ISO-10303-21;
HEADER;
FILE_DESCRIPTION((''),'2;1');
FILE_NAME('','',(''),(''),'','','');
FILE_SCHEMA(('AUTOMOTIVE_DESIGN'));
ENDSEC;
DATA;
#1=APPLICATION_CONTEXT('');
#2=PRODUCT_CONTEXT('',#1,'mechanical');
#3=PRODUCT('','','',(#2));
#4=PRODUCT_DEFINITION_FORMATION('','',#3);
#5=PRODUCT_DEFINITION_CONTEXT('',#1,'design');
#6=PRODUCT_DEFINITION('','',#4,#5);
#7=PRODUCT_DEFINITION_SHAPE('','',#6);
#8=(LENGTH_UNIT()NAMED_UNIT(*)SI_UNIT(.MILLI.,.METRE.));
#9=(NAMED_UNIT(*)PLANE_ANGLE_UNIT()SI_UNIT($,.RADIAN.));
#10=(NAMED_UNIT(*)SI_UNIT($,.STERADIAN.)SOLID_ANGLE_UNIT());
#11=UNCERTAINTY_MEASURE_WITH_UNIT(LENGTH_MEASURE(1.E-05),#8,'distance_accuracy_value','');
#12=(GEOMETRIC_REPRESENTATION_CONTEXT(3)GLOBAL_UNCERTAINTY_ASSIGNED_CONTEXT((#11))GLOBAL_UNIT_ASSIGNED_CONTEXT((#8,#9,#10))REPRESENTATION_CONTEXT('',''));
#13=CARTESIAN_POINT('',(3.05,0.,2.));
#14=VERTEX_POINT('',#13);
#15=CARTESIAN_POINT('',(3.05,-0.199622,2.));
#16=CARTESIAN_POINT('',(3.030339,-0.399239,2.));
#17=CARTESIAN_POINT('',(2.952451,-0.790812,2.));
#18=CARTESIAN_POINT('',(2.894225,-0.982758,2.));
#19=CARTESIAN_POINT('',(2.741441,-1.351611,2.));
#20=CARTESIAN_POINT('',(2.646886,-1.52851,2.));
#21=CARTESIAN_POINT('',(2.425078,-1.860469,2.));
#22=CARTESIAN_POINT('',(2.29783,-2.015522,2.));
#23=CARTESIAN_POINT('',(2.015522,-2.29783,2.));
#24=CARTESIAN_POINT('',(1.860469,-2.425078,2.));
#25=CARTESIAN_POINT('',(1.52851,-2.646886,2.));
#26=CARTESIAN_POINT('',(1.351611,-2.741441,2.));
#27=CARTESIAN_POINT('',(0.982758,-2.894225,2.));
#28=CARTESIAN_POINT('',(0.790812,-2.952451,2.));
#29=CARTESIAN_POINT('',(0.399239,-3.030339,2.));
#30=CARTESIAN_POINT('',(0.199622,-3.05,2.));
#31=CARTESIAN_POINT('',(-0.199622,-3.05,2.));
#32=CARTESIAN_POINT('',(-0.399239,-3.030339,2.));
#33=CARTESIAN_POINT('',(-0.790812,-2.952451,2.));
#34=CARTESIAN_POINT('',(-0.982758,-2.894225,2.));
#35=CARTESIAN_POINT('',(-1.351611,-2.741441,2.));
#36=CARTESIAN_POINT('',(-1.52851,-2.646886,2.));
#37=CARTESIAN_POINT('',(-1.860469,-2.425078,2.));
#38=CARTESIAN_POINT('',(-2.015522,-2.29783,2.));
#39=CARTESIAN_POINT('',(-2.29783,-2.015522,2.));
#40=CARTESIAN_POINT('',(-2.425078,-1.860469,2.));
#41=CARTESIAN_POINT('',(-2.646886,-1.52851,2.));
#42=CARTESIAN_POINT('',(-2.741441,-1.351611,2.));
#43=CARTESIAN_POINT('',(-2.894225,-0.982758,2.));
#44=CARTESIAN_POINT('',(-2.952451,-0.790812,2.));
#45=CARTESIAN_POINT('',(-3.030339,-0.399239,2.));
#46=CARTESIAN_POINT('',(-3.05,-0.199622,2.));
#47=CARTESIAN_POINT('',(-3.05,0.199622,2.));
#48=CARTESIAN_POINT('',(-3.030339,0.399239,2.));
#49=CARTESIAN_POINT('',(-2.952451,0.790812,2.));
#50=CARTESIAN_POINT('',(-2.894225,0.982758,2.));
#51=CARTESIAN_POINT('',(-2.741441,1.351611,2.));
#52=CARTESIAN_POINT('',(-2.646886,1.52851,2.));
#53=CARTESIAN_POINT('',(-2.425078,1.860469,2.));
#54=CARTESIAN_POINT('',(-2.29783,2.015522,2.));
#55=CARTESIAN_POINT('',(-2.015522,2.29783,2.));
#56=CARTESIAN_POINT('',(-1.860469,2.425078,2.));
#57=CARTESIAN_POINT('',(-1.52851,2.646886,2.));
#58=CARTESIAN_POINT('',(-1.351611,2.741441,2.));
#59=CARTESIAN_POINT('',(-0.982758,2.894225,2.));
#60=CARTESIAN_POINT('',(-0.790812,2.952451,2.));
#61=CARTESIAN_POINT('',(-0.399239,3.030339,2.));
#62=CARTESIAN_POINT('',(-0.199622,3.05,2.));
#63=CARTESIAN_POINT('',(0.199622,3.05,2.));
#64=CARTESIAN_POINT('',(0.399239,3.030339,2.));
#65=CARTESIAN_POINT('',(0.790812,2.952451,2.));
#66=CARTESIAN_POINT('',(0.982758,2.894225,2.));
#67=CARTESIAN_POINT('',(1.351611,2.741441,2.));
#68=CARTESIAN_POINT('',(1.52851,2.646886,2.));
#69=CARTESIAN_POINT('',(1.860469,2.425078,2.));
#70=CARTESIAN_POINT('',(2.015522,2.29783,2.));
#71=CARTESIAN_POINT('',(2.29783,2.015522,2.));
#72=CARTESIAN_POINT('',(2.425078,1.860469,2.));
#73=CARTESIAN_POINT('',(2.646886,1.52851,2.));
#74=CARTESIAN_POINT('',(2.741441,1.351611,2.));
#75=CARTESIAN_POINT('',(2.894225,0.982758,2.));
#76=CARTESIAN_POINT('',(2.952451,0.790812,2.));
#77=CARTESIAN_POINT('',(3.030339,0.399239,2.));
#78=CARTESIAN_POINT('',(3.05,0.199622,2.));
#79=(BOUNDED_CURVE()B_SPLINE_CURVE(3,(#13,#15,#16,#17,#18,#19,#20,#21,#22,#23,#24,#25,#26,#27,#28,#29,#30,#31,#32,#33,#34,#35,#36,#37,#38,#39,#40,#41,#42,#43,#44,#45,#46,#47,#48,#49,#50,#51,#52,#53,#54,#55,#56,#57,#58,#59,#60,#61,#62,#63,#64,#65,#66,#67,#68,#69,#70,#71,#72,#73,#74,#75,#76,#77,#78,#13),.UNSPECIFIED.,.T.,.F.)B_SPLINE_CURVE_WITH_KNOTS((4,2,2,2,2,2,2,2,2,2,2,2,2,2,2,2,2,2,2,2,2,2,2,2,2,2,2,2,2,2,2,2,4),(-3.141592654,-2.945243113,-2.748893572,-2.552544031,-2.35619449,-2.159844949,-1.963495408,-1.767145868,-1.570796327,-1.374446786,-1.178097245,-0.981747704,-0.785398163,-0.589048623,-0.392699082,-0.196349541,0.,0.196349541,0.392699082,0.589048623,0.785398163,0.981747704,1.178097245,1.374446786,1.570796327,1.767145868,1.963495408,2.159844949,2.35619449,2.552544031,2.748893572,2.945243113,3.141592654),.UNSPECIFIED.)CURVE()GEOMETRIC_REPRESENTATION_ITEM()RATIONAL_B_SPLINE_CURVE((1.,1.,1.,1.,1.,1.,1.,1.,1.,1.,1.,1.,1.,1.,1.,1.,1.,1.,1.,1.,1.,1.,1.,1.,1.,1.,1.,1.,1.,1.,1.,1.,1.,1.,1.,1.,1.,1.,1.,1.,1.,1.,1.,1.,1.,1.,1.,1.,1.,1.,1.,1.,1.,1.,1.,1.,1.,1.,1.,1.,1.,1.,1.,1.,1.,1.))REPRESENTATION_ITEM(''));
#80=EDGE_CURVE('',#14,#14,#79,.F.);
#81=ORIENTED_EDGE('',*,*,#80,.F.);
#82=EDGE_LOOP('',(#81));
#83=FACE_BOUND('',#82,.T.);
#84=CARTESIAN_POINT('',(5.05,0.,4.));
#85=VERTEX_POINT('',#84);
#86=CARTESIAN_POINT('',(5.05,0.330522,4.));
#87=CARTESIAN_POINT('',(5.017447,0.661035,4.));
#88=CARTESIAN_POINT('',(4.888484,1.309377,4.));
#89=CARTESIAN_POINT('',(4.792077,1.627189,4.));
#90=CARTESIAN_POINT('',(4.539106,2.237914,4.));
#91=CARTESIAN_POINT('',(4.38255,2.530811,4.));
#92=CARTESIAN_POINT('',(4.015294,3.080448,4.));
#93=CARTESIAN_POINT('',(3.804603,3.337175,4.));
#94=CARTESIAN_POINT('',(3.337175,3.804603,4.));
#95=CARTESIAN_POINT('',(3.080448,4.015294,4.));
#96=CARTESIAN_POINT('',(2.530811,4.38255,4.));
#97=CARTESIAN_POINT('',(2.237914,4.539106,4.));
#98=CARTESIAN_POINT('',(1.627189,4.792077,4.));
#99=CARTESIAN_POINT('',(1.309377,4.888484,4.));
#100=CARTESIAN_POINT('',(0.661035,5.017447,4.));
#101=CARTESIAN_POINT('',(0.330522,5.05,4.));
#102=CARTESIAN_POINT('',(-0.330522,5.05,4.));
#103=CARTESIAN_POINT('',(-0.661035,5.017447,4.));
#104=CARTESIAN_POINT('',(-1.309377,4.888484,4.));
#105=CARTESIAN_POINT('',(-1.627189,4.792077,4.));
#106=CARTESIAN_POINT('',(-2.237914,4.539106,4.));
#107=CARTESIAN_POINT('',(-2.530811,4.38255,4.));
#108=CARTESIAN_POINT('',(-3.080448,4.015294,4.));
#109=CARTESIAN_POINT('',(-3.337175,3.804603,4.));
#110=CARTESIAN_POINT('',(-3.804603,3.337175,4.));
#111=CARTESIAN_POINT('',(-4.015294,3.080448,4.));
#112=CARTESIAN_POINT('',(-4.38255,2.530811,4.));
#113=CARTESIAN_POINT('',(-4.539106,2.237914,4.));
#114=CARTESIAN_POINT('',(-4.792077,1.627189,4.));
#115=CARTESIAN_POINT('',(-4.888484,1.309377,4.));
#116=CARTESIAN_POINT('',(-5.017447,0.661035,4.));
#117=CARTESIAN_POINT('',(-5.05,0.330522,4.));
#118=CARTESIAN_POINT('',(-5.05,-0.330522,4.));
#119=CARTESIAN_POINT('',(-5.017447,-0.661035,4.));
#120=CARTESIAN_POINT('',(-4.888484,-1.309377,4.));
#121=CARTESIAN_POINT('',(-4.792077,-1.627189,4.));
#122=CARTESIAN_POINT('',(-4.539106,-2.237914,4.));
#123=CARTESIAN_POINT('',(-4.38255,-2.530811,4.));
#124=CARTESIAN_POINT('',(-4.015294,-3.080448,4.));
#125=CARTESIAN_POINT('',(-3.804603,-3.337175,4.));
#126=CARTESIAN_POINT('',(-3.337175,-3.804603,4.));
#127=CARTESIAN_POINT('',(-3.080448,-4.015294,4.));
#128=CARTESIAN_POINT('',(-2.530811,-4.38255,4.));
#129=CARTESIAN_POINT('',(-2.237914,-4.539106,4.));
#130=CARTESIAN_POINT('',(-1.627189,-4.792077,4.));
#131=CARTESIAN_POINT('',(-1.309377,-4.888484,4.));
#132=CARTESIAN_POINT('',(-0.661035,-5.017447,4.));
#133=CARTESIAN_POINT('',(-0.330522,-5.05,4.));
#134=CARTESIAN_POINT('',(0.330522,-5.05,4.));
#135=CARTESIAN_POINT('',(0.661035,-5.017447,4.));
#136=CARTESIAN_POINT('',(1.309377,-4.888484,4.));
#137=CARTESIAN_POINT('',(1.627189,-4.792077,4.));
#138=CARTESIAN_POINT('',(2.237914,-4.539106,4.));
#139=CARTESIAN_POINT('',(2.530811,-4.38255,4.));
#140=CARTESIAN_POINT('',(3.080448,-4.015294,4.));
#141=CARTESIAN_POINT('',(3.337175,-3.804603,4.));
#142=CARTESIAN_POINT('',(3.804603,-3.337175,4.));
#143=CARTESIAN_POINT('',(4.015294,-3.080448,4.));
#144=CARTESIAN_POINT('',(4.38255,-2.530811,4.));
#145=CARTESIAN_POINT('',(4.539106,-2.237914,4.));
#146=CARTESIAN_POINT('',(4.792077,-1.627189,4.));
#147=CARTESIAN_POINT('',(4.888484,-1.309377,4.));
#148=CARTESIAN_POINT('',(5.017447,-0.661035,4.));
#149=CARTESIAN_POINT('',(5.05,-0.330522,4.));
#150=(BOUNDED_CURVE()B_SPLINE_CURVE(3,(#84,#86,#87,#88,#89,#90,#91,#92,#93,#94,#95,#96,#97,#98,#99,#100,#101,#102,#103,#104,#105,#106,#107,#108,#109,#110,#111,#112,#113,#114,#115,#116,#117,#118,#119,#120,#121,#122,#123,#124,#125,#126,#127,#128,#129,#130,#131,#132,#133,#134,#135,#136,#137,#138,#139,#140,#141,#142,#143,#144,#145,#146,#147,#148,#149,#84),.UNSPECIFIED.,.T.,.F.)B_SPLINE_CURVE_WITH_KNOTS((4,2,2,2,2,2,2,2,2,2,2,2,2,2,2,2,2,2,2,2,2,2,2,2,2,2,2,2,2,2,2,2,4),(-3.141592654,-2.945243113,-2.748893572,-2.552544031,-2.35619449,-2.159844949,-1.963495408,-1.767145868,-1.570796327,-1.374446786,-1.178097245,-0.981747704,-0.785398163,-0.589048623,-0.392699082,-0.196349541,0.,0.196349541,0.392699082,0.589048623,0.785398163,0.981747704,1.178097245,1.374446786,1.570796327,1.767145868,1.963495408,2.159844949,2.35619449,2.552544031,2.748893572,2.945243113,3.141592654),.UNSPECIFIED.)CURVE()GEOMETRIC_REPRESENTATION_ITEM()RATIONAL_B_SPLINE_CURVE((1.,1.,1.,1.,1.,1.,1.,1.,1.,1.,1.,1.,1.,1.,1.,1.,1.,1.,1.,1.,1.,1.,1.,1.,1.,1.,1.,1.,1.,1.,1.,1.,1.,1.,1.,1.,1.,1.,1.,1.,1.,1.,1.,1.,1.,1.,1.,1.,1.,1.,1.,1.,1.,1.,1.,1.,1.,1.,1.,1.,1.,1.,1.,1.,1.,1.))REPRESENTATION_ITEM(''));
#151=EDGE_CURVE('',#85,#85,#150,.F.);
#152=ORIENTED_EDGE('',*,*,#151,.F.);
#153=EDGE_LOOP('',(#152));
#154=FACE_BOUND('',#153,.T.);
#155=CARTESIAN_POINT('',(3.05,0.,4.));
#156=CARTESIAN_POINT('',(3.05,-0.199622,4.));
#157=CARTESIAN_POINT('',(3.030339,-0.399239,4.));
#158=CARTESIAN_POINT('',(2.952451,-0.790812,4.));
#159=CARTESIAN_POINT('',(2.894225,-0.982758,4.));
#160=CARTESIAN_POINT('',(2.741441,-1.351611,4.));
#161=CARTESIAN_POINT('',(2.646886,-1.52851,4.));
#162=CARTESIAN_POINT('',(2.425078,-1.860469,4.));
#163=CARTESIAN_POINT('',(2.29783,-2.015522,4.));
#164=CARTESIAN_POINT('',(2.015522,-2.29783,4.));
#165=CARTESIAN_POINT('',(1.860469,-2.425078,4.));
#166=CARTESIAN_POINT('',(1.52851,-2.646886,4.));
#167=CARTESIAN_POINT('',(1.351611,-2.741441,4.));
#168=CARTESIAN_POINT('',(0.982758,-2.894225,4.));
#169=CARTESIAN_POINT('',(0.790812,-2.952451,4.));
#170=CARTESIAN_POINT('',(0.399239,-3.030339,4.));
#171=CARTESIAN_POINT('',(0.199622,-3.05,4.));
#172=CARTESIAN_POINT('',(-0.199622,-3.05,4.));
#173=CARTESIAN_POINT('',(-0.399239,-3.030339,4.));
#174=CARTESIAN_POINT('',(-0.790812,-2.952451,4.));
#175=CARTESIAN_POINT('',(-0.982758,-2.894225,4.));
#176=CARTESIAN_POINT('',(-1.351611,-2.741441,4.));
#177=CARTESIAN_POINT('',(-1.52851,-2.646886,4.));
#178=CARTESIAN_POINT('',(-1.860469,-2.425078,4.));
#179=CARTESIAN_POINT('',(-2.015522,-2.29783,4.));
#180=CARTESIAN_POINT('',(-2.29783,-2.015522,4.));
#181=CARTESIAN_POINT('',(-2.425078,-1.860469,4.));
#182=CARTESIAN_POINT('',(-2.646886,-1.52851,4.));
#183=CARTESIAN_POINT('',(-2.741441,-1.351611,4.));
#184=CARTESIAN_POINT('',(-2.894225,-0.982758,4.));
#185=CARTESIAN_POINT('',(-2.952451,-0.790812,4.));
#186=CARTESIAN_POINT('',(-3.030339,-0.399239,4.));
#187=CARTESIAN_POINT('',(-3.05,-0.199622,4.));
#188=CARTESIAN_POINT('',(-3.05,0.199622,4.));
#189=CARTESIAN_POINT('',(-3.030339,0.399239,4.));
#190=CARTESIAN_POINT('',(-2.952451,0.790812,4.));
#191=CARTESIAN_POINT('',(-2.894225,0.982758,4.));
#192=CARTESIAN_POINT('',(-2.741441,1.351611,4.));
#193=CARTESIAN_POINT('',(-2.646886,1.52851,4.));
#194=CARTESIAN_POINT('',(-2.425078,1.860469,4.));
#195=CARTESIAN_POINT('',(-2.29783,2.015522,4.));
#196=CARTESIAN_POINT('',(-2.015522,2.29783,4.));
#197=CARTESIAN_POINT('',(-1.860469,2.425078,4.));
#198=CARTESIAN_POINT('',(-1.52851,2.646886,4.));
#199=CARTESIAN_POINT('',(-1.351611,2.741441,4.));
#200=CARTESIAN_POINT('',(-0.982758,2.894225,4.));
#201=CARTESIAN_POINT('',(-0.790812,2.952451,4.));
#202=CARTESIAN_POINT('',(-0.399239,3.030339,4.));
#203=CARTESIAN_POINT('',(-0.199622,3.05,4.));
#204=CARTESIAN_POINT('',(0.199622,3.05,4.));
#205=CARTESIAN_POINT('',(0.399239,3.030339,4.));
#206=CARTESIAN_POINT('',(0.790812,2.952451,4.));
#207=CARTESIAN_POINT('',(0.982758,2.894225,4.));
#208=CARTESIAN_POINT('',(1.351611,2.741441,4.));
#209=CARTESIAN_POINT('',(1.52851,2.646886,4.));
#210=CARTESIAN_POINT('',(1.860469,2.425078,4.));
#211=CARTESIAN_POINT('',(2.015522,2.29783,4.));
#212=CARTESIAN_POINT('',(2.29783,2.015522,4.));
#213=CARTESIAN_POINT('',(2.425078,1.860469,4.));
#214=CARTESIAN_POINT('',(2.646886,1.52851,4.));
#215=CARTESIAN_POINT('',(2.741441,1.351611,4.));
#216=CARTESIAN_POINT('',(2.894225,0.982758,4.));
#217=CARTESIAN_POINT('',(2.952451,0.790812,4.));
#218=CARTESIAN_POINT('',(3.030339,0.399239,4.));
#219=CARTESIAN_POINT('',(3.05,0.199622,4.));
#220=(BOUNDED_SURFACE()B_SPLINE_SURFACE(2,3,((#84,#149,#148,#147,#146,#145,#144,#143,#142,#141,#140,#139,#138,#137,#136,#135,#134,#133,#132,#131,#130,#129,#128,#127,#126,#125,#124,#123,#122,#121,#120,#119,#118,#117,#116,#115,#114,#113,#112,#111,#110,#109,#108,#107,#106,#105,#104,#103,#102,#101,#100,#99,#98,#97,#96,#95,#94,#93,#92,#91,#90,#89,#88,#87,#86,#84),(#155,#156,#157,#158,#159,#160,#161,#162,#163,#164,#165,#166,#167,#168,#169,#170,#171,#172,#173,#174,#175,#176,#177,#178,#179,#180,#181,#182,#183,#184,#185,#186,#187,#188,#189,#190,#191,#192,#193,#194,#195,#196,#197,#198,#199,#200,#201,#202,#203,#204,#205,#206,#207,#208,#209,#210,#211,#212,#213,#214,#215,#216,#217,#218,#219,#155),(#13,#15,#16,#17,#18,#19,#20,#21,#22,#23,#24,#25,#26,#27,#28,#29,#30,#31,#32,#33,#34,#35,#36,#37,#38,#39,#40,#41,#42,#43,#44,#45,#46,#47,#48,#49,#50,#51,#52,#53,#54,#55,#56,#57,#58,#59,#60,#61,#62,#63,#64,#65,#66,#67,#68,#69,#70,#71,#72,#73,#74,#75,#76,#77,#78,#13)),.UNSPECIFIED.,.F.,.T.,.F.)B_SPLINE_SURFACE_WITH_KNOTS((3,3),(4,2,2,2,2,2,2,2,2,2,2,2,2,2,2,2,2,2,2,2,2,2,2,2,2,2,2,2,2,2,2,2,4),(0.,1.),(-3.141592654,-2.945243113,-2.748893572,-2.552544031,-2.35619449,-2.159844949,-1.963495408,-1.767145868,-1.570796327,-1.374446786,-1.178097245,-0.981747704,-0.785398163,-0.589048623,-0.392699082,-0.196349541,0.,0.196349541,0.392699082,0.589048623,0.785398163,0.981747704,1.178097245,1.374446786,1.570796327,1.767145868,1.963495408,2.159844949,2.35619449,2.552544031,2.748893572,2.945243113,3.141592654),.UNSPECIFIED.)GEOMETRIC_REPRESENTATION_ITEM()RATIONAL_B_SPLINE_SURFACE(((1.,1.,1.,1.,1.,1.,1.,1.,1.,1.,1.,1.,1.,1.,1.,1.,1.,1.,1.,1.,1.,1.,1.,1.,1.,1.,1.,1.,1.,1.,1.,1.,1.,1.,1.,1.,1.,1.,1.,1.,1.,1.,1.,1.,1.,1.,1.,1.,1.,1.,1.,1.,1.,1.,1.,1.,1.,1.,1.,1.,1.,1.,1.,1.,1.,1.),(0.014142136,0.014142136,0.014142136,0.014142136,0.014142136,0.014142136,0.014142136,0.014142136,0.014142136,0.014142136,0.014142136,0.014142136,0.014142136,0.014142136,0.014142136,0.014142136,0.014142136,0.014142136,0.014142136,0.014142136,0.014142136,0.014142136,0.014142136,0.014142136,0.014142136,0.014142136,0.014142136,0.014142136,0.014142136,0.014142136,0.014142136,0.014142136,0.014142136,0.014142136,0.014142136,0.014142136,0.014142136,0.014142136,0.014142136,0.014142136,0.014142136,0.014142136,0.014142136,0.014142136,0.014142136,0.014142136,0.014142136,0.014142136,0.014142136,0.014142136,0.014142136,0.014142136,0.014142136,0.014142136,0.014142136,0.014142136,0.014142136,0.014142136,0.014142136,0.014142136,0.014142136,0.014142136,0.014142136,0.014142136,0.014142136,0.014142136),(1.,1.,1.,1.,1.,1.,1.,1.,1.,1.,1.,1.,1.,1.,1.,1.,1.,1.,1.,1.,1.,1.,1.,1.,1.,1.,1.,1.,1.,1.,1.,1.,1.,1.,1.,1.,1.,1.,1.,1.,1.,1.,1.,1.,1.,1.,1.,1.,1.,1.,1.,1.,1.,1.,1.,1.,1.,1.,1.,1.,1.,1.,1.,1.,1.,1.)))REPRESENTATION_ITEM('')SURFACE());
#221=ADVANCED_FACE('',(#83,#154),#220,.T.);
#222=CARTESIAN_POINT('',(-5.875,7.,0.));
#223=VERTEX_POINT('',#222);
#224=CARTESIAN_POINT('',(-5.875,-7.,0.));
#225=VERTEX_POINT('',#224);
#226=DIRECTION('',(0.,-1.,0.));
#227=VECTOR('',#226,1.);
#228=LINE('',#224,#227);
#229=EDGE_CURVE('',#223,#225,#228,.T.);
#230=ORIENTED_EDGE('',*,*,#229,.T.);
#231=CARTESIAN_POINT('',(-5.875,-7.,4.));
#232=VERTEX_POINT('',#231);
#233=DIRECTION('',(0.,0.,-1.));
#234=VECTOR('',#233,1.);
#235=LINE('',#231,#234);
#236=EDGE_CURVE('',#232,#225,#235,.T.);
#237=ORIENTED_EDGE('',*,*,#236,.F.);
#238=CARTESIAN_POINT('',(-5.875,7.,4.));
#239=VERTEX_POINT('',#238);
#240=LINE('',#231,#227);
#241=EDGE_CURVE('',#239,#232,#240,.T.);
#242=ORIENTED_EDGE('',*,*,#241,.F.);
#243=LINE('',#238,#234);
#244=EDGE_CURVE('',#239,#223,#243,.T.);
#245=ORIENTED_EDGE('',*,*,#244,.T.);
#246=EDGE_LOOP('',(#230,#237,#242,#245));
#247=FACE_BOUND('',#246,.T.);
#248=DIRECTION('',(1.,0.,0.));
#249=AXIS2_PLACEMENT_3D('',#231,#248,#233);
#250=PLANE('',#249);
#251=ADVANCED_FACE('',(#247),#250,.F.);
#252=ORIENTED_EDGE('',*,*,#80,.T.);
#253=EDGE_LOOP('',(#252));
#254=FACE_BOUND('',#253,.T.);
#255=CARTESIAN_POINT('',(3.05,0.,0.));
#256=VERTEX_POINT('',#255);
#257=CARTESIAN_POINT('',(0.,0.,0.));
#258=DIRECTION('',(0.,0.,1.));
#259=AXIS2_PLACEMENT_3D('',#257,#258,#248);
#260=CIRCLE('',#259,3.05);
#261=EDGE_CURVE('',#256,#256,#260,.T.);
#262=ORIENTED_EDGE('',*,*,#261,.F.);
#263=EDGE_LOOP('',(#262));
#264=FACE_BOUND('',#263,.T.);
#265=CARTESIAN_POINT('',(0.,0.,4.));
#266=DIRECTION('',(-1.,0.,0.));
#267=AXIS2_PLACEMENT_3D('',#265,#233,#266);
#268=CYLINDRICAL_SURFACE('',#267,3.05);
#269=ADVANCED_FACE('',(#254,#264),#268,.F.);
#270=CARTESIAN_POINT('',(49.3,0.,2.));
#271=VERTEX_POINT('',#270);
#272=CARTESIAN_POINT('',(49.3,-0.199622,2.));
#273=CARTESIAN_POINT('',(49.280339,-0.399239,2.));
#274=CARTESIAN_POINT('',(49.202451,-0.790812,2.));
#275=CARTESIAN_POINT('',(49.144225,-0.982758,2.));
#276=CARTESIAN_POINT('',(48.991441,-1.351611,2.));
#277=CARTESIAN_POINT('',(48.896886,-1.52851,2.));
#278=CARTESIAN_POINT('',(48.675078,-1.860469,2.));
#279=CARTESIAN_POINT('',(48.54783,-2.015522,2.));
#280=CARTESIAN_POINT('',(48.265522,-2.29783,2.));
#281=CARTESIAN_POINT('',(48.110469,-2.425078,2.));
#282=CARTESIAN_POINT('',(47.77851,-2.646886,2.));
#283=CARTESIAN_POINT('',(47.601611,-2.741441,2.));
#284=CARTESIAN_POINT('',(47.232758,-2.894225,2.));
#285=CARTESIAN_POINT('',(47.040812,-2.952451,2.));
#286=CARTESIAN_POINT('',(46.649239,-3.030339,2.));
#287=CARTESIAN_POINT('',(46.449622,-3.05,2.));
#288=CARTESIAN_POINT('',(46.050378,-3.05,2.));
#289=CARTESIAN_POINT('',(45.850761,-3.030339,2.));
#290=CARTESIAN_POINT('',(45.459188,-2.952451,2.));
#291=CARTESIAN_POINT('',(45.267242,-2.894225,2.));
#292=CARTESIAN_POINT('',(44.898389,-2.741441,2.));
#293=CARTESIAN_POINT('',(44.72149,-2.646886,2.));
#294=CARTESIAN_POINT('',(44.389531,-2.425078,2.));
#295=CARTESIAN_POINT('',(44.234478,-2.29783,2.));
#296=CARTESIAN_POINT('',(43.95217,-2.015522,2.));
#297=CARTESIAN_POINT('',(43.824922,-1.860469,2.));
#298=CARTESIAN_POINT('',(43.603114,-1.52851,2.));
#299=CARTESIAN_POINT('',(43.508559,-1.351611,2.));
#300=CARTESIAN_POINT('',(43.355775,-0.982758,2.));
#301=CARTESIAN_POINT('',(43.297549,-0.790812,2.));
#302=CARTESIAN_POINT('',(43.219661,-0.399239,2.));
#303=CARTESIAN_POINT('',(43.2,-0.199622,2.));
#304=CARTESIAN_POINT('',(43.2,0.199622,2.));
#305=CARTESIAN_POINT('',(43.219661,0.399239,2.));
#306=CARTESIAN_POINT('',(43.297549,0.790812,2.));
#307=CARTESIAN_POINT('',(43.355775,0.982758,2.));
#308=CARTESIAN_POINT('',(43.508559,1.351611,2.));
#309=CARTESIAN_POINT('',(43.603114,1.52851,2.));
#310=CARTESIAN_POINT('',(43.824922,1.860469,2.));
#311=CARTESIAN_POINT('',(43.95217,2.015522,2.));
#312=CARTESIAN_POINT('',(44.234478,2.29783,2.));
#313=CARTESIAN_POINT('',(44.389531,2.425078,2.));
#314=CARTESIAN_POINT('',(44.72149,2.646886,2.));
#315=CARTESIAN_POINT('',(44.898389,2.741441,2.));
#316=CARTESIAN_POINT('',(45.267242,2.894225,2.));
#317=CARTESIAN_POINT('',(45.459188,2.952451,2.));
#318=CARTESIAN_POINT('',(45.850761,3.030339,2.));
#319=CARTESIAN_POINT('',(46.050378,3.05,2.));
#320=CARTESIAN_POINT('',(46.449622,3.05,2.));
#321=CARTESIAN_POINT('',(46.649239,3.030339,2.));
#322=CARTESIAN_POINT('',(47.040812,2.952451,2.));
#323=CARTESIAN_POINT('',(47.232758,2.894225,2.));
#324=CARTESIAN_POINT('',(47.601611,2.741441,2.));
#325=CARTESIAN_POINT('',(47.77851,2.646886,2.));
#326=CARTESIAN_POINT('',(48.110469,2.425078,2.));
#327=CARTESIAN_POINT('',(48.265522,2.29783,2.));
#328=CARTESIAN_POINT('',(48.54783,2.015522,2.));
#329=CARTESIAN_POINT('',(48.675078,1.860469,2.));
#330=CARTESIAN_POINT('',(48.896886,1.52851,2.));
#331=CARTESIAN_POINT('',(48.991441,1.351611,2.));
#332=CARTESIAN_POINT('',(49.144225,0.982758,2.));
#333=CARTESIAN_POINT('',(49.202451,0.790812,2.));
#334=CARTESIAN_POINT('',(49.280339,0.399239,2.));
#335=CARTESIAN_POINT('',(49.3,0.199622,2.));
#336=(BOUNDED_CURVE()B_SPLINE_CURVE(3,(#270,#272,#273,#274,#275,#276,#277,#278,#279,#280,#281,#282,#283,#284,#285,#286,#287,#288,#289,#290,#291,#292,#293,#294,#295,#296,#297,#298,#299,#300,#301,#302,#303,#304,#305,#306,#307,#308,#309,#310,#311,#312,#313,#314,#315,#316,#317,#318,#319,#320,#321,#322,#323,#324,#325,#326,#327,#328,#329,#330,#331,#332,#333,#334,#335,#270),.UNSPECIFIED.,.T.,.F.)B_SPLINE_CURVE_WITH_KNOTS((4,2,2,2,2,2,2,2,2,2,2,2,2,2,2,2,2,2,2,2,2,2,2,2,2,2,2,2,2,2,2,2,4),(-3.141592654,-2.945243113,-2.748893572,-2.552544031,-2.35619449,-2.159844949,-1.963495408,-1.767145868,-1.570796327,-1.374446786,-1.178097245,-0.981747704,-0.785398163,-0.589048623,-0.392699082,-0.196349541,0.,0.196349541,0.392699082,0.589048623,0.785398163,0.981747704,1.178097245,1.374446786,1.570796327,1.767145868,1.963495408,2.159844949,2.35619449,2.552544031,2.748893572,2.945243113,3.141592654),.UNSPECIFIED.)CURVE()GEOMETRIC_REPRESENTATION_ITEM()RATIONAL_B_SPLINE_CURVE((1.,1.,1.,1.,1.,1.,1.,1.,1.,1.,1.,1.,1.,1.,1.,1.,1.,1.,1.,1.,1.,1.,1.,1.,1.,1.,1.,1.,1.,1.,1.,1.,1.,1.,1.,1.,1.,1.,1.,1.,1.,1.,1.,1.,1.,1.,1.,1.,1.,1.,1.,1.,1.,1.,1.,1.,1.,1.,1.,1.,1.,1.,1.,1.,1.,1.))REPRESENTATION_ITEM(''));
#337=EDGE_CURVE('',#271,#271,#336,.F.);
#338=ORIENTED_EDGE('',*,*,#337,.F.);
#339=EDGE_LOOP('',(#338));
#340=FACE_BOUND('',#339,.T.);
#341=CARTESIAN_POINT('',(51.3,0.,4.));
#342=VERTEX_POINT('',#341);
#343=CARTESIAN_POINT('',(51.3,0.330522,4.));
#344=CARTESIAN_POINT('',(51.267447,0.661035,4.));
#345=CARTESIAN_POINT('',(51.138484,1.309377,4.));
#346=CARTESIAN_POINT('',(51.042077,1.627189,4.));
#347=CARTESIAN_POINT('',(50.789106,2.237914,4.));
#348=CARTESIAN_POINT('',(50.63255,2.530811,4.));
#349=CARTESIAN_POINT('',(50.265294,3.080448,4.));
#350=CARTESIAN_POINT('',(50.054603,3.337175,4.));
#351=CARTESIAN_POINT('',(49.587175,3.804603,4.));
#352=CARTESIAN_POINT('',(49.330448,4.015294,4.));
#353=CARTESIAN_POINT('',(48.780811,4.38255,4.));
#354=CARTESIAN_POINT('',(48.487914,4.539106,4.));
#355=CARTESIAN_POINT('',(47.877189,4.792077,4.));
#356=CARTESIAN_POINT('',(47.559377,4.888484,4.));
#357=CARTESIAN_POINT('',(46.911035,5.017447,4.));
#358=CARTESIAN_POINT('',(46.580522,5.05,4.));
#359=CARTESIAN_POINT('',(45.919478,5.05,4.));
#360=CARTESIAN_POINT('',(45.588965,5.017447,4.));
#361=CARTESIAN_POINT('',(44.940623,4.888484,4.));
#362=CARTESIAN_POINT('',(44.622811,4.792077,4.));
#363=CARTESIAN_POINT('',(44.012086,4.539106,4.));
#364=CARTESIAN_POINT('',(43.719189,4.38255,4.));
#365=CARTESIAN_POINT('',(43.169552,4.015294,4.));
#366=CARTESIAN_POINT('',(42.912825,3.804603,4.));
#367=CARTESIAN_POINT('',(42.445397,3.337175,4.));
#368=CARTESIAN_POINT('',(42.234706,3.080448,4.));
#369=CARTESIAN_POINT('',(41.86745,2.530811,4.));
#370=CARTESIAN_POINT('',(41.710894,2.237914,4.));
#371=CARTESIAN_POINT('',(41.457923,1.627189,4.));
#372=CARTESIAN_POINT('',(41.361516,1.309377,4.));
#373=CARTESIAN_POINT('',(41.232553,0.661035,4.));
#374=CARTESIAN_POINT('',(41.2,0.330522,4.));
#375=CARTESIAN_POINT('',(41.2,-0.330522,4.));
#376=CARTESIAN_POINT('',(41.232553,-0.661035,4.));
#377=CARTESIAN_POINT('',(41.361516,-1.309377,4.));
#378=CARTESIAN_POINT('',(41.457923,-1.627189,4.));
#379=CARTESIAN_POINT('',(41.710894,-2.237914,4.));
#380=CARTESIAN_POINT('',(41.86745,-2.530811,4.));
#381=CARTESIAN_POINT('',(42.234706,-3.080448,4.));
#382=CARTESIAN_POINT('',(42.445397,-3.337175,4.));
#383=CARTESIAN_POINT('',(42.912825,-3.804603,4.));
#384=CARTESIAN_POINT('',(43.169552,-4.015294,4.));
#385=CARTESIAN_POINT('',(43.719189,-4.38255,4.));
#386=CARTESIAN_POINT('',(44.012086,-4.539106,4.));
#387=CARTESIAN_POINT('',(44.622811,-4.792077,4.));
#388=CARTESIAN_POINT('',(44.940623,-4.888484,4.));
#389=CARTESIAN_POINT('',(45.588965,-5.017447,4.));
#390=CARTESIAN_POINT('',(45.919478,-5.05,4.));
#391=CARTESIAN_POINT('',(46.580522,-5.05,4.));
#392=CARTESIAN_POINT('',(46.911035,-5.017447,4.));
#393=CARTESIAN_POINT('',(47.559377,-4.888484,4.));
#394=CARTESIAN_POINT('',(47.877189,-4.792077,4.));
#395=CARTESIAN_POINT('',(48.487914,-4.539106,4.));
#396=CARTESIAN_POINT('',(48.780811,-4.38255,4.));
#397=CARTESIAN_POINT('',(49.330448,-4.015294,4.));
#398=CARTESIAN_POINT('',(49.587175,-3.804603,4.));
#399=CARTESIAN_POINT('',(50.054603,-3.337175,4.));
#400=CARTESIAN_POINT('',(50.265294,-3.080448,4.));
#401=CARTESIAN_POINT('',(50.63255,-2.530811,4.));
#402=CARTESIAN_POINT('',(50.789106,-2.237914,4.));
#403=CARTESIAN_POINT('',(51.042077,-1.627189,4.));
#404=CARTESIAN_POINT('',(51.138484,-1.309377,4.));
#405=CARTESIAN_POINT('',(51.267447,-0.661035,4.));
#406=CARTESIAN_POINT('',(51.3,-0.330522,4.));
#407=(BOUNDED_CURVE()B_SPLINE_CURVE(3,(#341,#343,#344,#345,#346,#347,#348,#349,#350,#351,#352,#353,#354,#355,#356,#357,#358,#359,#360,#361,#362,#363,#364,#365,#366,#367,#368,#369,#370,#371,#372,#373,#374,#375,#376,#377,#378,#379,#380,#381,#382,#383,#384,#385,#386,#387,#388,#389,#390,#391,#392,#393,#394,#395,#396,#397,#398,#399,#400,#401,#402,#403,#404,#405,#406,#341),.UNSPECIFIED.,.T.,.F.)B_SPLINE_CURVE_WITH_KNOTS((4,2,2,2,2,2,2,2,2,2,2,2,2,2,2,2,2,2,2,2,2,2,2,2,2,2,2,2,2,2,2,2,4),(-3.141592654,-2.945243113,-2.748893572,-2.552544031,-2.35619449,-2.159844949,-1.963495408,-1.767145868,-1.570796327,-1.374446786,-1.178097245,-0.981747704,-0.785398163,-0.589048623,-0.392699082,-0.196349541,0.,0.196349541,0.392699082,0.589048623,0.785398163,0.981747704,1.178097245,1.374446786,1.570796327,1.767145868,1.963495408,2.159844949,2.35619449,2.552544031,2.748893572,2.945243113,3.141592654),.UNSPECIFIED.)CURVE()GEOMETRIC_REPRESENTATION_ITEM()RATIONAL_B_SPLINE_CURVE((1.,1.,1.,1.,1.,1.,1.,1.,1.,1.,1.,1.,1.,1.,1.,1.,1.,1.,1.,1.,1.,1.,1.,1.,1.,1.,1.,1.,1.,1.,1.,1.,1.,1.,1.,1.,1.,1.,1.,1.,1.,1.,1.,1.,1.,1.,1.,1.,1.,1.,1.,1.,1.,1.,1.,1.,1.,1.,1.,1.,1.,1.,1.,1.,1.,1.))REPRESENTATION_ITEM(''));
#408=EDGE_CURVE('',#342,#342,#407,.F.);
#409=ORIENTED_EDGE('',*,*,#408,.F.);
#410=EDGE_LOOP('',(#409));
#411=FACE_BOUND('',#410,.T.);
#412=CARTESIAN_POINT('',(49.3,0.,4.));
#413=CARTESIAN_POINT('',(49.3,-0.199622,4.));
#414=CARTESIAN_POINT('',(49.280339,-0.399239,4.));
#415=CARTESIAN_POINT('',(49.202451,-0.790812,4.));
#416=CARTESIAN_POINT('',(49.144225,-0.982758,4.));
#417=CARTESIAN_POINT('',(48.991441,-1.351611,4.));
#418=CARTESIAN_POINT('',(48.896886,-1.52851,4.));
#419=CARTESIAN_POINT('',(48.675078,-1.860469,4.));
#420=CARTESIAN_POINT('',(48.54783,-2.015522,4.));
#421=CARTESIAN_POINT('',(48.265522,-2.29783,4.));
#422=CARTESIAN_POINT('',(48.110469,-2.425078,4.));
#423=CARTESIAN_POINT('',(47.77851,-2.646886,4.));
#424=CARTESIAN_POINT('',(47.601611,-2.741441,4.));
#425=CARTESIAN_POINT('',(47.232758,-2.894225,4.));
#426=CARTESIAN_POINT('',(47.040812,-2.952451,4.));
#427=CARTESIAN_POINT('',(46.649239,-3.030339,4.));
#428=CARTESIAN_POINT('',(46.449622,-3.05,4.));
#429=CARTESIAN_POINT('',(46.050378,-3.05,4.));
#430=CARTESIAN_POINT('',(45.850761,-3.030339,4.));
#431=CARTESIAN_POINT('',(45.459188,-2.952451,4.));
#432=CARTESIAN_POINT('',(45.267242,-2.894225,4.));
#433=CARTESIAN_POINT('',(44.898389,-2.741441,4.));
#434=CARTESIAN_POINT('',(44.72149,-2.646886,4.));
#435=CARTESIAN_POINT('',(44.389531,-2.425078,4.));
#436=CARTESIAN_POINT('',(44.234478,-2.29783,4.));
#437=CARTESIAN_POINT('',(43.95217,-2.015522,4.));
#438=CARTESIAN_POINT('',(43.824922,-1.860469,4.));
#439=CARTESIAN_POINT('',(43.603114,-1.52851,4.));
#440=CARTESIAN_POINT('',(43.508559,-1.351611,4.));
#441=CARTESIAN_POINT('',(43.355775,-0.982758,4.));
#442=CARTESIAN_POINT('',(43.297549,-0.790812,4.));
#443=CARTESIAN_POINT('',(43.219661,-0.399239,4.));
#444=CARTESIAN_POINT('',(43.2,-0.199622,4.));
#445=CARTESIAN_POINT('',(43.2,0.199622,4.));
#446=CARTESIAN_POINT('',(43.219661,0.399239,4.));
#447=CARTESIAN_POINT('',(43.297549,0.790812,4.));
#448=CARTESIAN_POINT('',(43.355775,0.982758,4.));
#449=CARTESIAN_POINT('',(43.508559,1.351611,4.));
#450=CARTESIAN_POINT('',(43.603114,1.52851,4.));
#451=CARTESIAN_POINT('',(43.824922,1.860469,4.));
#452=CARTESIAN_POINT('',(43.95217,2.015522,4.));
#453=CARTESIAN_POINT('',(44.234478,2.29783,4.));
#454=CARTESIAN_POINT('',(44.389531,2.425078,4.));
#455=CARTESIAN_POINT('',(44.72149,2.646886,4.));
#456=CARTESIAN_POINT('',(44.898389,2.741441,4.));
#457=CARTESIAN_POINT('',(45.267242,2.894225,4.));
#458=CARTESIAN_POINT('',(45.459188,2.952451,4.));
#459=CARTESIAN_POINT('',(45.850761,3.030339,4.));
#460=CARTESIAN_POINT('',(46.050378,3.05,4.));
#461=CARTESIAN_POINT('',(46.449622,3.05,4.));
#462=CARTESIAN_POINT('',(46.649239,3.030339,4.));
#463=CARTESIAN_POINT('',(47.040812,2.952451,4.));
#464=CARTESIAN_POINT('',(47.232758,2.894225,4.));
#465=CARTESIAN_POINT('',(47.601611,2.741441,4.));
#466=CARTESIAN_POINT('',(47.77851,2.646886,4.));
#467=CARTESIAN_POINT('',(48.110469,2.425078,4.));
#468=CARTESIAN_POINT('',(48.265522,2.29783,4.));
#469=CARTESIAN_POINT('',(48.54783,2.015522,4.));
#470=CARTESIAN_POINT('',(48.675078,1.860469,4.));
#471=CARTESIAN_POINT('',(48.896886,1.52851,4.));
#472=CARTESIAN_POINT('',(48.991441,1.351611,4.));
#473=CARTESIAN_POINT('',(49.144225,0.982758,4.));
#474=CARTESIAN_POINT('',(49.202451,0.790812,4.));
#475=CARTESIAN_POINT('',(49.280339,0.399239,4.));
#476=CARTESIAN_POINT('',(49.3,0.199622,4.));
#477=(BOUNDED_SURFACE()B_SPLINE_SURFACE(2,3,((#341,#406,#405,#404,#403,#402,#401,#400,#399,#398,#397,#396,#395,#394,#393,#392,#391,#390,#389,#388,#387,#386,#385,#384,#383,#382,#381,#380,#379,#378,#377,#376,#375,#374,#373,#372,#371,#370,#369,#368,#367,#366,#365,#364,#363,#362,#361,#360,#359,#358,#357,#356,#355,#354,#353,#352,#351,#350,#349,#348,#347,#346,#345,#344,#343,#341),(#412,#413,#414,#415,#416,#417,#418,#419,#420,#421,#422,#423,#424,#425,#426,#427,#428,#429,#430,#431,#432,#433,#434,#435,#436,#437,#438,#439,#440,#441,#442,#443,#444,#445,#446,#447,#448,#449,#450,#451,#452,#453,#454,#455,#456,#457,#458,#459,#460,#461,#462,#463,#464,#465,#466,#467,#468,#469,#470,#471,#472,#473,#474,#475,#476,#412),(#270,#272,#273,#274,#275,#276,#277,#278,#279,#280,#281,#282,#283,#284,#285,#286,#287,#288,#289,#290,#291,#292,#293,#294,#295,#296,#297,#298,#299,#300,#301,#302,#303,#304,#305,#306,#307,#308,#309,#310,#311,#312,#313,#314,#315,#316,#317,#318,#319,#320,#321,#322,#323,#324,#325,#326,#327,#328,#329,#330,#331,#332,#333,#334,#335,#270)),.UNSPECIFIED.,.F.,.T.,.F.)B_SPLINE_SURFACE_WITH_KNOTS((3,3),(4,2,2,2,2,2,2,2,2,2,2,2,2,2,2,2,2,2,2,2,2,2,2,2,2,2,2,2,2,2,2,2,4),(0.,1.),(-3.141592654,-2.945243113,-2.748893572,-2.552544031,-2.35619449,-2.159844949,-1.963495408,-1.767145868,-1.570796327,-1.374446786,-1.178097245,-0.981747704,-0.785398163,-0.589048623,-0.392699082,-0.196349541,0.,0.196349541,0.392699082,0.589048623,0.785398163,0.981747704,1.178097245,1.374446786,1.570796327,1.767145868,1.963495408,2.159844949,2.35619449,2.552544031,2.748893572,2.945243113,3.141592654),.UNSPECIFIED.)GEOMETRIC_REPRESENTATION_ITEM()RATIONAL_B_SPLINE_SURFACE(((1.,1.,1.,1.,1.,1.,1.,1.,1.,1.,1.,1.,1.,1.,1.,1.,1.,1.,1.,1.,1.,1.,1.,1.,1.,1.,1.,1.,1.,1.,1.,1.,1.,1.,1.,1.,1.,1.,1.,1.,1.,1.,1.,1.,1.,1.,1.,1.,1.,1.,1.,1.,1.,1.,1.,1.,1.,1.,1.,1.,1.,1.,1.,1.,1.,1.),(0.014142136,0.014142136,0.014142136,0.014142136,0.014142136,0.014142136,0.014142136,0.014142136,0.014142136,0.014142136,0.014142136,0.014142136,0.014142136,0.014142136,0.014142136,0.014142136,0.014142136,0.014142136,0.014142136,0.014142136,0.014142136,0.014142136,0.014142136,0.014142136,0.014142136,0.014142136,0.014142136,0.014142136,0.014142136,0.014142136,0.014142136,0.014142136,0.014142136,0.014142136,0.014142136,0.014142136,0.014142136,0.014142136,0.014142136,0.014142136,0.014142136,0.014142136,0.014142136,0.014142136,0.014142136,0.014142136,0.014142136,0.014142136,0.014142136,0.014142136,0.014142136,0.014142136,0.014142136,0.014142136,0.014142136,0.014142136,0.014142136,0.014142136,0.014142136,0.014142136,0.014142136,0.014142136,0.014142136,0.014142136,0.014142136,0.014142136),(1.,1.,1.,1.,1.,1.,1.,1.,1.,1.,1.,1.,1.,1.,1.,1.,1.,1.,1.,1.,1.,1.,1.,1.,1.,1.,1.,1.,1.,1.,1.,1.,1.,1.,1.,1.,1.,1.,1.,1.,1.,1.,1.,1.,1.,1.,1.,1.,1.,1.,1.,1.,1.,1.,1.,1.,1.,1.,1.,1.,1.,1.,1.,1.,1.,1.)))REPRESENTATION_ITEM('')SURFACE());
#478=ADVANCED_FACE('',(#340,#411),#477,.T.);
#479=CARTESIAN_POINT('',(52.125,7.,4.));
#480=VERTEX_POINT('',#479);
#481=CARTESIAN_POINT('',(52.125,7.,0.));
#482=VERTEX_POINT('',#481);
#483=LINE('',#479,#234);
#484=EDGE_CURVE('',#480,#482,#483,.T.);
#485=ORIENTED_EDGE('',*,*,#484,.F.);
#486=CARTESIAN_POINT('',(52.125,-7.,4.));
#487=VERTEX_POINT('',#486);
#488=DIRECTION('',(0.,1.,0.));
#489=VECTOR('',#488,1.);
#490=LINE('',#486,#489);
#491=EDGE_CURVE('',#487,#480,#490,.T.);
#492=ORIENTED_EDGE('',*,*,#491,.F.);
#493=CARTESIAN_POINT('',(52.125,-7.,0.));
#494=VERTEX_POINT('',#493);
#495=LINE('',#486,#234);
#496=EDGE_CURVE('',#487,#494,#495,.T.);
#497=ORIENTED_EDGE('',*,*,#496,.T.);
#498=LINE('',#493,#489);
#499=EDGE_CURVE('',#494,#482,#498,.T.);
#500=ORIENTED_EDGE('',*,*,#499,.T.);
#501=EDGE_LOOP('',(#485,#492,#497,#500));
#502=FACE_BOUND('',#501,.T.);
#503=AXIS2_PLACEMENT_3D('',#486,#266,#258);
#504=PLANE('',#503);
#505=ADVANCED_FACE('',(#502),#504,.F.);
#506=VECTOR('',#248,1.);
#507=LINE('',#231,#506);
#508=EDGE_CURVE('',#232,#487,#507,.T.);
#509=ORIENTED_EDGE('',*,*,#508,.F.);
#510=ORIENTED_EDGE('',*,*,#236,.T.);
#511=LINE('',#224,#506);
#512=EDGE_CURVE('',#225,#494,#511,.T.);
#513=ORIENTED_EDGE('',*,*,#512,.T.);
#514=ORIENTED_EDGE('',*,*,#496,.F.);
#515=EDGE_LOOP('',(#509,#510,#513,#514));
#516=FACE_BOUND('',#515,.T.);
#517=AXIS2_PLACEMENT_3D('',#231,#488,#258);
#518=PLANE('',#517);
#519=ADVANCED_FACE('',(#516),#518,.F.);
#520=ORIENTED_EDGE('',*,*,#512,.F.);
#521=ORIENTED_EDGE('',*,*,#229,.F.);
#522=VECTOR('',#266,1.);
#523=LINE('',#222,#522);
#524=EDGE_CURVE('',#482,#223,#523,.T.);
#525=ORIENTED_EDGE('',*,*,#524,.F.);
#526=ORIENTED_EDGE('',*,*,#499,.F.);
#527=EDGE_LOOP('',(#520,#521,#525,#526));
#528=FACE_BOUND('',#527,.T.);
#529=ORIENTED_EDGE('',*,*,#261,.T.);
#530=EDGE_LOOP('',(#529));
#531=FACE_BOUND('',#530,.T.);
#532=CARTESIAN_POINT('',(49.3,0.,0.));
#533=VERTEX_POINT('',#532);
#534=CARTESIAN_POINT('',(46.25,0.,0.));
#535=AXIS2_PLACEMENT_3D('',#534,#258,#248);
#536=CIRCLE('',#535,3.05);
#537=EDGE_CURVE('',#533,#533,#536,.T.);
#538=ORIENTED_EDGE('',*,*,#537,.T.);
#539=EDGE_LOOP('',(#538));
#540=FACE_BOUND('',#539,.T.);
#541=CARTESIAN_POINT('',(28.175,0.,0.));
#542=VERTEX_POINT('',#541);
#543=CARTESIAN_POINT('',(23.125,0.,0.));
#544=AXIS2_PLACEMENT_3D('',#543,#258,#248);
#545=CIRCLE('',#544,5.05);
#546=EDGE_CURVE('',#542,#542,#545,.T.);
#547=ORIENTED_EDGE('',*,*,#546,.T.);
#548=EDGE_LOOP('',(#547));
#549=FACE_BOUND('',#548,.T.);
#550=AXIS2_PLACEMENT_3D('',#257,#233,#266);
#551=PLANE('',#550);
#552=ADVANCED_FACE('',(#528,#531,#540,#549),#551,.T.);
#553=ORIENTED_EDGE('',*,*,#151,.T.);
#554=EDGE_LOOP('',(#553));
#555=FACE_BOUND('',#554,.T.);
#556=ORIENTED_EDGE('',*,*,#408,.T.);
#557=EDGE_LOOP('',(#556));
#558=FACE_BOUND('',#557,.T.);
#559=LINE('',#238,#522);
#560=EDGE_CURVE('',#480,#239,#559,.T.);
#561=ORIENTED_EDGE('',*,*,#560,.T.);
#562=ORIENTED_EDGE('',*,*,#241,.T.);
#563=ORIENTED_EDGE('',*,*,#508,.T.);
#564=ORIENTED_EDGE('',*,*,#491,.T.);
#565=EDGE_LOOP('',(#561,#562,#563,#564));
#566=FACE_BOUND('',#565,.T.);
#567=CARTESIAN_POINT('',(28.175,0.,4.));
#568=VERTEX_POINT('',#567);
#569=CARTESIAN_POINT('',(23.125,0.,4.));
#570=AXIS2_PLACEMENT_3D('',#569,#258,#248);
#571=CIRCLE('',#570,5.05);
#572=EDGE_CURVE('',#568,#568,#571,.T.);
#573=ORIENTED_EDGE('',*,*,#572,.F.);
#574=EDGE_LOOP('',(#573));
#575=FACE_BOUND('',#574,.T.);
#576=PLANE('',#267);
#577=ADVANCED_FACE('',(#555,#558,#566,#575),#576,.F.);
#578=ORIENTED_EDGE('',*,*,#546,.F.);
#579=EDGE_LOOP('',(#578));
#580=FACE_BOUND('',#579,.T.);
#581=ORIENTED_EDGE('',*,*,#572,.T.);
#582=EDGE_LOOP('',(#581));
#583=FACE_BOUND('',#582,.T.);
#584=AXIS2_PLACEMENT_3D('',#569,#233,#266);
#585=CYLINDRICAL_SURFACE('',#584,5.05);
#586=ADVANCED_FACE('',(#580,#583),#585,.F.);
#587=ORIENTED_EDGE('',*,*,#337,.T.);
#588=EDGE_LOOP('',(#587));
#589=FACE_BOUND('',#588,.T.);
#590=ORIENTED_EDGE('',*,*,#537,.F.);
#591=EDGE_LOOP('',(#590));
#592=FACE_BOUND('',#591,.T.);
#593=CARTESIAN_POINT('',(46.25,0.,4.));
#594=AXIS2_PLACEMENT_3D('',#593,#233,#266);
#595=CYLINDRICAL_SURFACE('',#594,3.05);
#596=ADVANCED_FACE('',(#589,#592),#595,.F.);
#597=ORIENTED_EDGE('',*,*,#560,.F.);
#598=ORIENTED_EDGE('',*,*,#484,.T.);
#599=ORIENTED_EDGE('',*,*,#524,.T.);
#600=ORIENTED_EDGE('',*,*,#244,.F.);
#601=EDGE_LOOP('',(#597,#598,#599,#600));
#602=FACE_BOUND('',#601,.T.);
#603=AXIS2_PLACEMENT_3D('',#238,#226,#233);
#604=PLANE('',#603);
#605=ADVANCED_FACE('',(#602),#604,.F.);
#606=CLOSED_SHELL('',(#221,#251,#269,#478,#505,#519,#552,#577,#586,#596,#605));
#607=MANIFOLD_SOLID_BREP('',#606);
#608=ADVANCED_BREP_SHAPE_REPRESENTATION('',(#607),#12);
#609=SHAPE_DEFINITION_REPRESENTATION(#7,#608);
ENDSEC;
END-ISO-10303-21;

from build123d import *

# Parameters (mm, degrees)
SKETCH_1_W      = 58
SKETCH_1_H      = 14
SKETCH_1_R      = 3.05
SKETCH_1_R_2    = 5.05
EXTRUDE_1_DEPTH = 4
FILLET_1_SIZE   = 2


with BuildPart() as part:
    # 草图1 → 凸台-拉伸1 (new body)
    with BuildSketch(Plane.XY):
        with Locations((23.125, 0)):
            Rectangle(SKETCH_1_W, SKETCH_1_H)
        Circle(SKETCH_1_R, mode=Mode.SUBTRACT)
        with Locations((46.25, 0)):
            Circle(SKETCH_1_R, mode=Mode.SUBTRACT)
        with Locations((23.125, 0)):
            Circle(SKETCH_1_R_2, mode=Mode.SUBTRACT)
    extrude(amount=EXTRUDE_1_DEPTH)

    # 圆角1
    # a fillet whose section is not a circle: 2 mm, written as the material it takes off along each edge
    with BuildSketch(Plane(origin=(0, 0, 4), x_dir=(1, 0, 0), z_dir=(0, -1, 0))) as fillet_1_piece_1:
        with BuildLine():
            Bezier((3.05, -FILLET_1_SIZE), (3.05, 0), (3.05 + FILLET_1_SIZE, 0), weights=[1, 0.014142136, 1])
            Line((3.05 + FILLET_1_SIZE, 0), (3.05, 0))
            Line((3.05, 0), (3.05, -FILLET_1_SIZE))
        make_face()
    revolve(axis=Axis((0, 0, 4), (0, 0, 1)), mode=Mode.SUBTRACT)
    with BuildSketch(Plane(origin=(46.25, 0, 4), x_dir=(1, 0, 0), z_dir=(0, -1, 0))) as fillet_1_piece_2:
        with BuildLine():
            Bezier((3.05, -FILLET_1_SIZE), (3.05, 0), (3.05 + FILLET_1_SIZE, 0), weights=[1, 0.014142136, 1])
            Line((3.05 + FILLET_1_SIZE, 0), (3.05, 0))
            Line((3.05, 0), (3.05, -FILLET_1_SIZE))
        make_face()
    revolve(axis=Axis((46.25, 0, 4), (0, 0, 1)), mode=Mode.SUBTRACT)


solid = part.part
